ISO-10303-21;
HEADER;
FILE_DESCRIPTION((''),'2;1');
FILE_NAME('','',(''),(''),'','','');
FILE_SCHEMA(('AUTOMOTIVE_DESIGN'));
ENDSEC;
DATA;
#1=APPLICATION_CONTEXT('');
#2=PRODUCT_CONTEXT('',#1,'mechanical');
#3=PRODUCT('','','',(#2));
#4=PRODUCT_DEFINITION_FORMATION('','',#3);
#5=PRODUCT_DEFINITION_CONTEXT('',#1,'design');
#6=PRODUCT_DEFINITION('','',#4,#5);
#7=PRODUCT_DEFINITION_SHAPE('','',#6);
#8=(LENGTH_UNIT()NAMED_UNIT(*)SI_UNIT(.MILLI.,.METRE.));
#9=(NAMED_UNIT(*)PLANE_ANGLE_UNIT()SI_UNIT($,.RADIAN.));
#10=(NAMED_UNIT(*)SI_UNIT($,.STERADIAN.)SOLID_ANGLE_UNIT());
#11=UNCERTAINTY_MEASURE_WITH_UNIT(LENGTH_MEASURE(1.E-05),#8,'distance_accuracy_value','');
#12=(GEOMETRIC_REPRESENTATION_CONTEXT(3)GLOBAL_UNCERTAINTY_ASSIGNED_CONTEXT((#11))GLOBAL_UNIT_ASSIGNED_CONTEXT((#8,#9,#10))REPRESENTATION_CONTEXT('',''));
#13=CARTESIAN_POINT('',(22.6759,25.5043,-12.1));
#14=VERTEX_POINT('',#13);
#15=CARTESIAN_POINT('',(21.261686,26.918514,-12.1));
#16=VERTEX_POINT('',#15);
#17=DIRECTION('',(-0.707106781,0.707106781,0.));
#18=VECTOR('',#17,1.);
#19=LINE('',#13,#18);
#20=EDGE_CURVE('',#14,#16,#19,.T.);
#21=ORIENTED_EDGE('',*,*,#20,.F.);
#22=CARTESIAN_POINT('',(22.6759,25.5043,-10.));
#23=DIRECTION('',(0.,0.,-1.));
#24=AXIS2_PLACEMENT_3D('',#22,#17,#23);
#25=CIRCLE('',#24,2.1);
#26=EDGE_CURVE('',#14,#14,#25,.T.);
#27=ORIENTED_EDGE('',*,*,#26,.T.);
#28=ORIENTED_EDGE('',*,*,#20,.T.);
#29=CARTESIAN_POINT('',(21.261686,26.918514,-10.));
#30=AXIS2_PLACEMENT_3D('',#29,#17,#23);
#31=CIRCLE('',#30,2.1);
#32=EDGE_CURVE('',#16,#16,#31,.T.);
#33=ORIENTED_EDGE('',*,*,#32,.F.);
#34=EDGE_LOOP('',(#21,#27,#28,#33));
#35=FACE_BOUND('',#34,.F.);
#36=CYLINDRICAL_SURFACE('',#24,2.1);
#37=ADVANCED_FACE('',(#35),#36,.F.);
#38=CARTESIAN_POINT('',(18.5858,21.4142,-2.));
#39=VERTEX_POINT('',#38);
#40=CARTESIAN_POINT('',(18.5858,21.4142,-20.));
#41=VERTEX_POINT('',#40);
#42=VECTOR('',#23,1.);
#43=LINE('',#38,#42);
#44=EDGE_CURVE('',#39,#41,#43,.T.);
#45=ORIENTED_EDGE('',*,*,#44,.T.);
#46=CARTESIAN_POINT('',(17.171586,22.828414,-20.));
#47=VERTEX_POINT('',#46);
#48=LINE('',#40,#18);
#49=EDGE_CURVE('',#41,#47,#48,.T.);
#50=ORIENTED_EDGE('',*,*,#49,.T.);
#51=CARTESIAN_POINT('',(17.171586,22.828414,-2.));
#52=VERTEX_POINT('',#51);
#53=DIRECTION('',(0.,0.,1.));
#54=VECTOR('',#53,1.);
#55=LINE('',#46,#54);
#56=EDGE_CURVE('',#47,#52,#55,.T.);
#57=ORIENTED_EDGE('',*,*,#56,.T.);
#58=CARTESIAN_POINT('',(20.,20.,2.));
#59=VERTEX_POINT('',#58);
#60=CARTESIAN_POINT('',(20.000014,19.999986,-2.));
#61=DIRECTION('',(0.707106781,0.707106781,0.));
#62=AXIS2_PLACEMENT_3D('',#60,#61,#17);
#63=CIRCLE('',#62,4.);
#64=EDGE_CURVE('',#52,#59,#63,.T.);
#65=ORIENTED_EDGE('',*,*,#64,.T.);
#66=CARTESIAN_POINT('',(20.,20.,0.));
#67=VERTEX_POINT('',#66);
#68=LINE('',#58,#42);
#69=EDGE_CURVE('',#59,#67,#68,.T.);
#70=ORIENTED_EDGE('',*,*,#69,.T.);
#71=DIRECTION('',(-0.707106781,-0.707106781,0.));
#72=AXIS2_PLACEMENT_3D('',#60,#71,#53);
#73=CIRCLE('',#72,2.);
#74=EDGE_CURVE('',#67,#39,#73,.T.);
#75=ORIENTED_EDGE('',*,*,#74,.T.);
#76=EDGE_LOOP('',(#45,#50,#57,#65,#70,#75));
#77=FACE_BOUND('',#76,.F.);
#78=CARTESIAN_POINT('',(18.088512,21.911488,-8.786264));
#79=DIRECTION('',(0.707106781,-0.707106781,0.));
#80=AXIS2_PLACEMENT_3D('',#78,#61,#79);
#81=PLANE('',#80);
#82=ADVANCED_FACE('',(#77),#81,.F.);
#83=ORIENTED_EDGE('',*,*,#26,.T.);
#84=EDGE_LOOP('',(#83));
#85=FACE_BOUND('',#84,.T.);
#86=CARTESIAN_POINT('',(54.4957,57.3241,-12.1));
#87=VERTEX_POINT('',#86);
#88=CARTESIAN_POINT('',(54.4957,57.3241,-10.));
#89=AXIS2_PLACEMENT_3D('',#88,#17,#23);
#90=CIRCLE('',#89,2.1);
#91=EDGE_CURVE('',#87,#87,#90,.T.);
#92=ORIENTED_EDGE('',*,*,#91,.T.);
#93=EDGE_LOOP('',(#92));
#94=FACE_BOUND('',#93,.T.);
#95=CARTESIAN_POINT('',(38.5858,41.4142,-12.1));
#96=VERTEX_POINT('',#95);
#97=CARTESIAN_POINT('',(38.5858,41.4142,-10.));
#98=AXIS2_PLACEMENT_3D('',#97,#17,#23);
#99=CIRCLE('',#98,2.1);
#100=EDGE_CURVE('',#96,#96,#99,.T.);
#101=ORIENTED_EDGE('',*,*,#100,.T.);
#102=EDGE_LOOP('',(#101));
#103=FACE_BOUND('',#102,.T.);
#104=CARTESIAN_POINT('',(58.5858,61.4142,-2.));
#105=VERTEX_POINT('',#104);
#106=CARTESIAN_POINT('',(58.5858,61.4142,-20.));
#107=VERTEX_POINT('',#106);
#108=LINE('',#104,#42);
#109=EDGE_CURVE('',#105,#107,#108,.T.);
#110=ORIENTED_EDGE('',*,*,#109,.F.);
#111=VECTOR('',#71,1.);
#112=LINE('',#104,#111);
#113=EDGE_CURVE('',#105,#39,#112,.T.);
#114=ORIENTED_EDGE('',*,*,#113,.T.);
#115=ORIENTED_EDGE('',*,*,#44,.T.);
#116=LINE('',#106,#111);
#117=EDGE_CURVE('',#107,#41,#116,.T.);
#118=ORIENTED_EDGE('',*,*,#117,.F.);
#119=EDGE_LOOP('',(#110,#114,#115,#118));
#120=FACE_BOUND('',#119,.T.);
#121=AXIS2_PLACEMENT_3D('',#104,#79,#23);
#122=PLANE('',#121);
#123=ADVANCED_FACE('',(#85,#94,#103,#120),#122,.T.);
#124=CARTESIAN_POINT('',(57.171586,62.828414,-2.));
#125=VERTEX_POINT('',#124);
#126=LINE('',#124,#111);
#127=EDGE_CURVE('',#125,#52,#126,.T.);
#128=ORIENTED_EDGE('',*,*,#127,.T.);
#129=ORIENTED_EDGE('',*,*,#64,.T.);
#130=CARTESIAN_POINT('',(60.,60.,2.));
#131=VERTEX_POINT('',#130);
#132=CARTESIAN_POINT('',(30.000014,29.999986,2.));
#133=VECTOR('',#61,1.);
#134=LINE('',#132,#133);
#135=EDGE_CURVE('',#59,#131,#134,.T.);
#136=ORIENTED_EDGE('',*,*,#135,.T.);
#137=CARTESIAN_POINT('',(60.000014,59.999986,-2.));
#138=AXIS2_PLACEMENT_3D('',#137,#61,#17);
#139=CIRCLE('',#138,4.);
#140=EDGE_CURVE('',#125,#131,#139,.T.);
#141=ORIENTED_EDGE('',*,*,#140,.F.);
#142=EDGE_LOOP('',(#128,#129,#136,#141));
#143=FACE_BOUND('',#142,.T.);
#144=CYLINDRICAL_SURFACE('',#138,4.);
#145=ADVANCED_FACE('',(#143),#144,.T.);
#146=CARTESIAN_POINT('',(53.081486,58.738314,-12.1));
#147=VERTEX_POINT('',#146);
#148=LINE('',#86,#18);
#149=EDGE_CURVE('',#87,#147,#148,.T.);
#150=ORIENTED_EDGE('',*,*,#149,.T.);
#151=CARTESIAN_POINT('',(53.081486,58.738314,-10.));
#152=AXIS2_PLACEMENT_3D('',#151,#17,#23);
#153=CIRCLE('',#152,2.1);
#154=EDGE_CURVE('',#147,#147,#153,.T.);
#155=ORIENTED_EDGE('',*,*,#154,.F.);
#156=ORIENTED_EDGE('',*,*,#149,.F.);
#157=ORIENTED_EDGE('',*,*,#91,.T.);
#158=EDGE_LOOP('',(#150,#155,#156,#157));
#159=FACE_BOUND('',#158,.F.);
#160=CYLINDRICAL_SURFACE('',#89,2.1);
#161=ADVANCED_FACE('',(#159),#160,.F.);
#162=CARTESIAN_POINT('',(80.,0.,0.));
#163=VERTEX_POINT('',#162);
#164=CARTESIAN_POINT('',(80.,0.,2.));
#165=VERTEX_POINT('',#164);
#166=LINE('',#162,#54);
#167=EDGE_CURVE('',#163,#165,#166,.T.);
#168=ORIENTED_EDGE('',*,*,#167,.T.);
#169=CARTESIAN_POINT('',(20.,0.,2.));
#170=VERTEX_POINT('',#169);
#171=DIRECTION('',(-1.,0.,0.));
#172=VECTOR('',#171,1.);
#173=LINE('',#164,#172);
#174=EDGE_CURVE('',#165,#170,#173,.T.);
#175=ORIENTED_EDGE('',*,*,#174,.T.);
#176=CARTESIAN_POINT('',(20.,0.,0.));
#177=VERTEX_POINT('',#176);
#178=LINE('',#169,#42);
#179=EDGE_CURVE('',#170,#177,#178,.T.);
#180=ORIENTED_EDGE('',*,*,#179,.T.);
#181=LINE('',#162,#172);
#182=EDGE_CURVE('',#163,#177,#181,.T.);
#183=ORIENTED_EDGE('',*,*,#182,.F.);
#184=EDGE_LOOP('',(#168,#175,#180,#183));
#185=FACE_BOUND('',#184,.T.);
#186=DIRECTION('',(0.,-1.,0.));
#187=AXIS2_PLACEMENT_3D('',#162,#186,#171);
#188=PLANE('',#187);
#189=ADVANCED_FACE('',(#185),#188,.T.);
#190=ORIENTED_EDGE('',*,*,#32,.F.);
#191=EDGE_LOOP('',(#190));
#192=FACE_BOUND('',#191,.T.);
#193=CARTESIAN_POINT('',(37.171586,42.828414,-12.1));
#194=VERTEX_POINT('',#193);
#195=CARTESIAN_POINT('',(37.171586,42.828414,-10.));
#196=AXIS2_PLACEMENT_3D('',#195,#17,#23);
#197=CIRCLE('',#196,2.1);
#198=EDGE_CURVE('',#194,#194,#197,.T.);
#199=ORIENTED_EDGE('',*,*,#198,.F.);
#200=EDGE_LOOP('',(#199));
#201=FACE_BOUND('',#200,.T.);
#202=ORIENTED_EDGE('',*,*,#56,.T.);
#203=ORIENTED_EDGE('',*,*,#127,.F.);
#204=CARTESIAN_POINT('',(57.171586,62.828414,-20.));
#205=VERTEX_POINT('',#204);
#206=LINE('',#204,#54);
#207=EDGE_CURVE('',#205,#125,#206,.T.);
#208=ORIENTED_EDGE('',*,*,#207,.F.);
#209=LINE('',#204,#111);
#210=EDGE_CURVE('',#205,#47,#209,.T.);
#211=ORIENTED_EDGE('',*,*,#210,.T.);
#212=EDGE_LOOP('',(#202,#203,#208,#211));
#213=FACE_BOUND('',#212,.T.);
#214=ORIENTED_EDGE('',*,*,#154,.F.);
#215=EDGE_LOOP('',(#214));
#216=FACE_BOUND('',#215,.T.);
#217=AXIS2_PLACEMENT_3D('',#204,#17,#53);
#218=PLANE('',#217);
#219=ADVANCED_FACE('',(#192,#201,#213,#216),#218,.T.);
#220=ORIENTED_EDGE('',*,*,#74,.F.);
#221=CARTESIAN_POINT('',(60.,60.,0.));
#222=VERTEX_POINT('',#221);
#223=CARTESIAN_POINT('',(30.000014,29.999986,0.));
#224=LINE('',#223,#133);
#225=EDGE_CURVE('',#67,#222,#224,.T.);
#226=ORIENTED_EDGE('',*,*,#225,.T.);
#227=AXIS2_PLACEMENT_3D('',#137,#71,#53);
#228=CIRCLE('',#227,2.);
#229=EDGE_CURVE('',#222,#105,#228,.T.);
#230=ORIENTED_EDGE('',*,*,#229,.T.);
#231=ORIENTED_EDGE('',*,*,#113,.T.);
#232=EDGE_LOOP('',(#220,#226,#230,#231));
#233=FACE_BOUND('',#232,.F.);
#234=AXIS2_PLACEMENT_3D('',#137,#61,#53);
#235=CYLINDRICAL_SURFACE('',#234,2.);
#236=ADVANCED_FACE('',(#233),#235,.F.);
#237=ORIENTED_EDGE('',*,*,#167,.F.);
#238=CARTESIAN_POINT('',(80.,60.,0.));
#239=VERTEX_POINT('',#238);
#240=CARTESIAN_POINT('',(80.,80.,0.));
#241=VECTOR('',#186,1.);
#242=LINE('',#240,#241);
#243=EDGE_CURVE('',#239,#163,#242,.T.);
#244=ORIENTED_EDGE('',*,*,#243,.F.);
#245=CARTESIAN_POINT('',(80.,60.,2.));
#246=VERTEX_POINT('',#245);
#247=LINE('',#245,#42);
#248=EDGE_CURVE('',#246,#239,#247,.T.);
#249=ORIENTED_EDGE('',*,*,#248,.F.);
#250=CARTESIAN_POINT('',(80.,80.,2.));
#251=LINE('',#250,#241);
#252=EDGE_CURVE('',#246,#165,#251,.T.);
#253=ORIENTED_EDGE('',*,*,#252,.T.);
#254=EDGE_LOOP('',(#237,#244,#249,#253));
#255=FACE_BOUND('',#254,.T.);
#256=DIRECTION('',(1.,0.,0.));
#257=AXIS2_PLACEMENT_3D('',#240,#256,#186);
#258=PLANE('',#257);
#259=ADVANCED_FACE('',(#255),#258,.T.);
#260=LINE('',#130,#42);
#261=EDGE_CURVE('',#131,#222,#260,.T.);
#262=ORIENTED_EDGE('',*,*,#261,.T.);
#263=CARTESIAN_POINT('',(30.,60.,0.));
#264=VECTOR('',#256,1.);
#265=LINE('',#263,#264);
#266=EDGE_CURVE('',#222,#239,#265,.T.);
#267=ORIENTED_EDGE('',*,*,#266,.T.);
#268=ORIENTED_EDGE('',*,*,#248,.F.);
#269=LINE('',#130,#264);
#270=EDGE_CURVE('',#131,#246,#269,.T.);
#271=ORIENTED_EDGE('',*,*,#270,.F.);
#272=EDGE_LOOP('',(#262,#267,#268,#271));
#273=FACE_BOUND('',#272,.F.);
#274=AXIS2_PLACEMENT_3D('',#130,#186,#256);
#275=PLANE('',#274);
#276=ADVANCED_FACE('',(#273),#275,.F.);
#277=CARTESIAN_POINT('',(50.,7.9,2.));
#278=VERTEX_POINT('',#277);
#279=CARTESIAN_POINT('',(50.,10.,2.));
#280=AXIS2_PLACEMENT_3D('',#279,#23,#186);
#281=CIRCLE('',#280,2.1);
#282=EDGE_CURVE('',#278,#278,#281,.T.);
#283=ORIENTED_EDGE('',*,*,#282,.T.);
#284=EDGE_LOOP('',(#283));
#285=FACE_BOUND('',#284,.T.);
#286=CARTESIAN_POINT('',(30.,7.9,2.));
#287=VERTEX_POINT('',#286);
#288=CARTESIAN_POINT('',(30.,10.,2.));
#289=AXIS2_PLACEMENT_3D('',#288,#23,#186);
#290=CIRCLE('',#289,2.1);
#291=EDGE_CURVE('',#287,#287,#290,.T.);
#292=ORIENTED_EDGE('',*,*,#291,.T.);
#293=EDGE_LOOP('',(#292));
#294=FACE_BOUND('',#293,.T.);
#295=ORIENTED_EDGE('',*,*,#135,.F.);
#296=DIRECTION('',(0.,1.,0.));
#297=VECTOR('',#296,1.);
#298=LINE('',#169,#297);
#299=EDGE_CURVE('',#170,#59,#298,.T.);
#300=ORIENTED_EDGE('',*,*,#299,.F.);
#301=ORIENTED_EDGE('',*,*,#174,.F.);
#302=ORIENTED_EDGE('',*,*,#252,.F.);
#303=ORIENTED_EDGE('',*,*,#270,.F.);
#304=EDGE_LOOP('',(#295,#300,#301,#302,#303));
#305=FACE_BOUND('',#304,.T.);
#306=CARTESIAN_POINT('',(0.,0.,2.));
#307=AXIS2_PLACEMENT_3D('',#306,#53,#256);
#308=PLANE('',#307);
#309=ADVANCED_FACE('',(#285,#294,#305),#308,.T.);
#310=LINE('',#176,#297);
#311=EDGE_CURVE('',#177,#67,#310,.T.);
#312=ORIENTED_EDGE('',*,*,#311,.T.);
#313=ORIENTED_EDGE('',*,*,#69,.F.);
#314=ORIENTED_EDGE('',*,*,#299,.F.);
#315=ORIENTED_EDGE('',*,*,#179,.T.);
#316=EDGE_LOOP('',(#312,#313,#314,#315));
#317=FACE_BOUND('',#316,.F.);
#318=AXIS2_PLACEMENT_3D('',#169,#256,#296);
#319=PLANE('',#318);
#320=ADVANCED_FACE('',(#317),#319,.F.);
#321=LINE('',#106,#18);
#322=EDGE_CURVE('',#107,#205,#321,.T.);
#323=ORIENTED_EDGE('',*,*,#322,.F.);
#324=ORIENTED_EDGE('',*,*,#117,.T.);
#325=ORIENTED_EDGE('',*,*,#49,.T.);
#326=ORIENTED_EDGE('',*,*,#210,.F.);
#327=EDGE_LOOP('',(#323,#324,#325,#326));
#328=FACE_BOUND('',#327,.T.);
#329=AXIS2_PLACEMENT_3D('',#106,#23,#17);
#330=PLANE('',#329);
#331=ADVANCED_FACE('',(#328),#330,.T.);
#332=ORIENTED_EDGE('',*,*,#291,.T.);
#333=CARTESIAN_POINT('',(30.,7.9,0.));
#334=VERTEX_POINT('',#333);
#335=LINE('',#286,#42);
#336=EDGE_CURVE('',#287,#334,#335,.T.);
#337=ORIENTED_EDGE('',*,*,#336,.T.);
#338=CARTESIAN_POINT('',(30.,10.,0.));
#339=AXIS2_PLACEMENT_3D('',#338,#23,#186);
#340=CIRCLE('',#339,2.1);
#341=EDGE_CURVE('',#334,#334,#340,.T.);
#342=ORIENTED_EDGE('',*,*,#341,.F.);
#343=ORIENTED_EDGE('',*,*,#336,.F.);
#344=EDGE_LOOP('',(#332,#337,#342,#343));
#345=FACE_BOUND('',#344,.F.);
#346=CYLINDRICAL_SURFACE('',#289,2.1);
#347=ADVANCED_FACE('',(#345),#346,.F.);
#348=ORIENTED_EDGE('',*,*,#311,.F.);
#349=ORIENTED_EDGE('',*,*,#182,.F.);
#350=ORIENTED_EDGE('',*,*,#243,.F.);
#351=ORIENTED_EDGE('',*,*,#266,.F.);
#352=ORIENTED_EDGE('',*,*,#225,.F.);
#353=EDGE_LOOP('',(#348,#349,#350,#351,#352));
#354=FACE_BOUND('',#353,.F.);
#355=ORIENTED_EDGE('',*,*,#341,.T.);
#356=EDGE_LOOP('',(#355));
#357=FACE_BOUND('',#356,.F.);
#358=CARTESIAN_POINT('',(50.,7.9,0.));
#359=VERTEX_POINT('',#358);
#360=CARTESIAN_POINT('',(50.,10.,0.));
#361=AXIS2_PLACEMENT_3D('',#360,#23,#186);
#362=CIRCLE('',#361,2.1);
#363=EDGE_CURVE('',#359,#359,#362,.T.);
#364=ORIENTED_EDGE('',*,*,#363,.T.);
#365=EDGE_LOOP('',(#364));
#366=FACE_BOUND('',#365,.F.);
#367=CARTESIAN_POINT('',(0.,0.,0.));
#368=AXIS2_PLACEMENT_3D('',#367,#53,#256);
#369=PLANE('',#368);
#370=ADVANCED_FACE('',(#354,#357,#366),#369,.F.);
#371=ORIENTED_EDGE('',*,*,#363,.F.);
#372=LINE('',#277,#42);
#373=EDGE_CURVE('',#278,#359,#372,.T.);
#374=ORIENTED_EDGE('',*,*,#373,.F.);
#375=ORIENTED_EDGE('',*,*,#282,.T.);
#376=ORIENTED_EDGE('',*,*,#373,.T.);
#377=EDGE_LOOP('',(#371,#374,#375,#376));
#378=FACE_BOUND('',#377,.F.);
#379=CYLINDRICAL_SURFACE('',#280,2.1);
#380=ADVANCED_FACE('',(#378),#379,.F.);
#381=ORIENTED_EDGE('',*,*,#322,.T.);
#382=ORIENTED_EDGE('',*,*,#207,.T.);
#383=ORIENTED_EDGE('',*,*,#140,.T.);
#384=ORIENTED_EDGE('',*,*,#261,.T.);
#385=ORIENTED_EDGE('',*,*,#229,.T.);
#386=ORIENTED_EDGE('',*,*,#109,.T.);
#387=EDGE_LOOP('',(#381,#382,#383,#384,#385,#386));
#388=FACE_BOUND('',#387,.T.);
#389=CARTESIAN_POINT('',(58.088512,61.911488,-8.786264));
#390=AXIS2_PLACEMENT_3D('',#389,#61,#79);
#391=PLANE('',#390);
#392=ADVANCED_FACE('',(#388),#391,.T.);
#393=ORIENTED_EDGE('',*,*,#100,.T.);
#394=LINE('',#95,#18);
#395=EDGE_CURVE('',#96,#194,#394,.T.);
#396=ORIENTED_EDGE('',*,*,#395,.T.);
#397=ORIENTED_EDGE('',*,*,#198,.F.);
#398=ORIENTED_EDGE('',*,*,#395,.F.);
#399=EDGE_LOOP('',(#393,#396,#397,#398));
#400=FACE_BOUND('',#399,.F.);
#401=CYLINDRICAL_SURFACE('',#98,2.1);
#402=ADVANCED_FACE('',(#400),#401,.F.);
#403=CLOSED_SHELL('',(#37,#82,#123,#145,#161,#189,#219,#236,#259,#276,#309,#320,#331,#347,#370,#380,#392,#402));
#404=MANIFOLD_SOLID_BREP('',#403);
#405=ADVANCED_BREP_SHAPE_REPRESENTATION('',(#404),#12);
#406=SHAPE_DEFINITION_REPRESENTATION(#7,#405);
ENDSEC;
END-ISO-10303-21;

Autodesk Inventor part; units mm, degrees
ref_plane "YZ Plane" through (0, 0, 0) normal (1, 0, 0) x (0, 1, 0)
ref_plane "XZ Plane" through (0, 0, 0) normal (0, 1, 0) x (-1, 0, 0)
ref_plane "XY Plane" through (0, 0, 0) normal (0, 0, 1) x (1, 0, 0)
sketch "スケッチ1" plane through (0, 0, 0) normal (0, 0, 1) x (1, 0, 0)
  line L0 (0, 0) -> (80, 80)
  line L1 (80, 80) -> (80, 0)
  line L2 (80, 0) -> (0, 0)
  dimension "d0" = 45
  dimension "d1" = 80
extrude "プレート1" add sketch "スケッチ1" along normal blind 2
sketch "スケッチ2" plane through (0, 0, 2) normal (0, 0, 1) x (1, 0, 0)
  line L0 (0, 0) -> (80, 80) projected
  line L1 (0, 0) -> (20, 0)
  line L2 (20, 0) -> (20, 20)
  line L3 (20, 20) -> (0, 20)
  line L4 (0, 20) -> (0, 0)
  line L5 (80, 80) -> (60, 80)
  line L6 (60, 80) -> (60, 60)
  line L7 (60, 60) -> (80, 60)
  line L8 (80, 60) -> (80, 80)
  line L9 (0, 0) -> (80, 80) projected
  dimension "d3" = 20
  dimension "d6" = 20
extrude "押し出し1" cut sketch "スケッチ2" against normal blind 10 contours L0 L2 L1 | L6 L5 L0 | L0 L8 L7
sketch "スケッチ3" plane through (0, 0, 2) normal (0, 0, 1) x (1, 0, 0)
  line L0 (20, 20) -> (20, 0) projected
  line L1 (80, 0) -> (20, 0) projected
  line L2 (80, 60) -> (80, 0) projected
  line L3 (80, 60) -> (60, 60) projected
  line L4 (20, 20) -> (60, 60) projected
  line L5 (20, 20) -> (60, 60) projected
  line L6 (20, 20) -> (18.5858, 21.4142)
  line L7 (18.5858, 21.4142) -> (58.5858, 61.4142)
  line L8 (58.5858, 61.4142) -> (60, 60)
  point P0 (0, 0)
  dimension "d7" = 2
extrude "押し出し2" add sketch "スケッチ3" against normal up to surface (2 mm away) contours L6 L7 L8 L4
sketch "スケッチ4" plane through (58.5858, 61.4142, 0) normal (-0.7071068, 0.7071068, 0) x (-0.7071068, -0.7071068, 0)
  line L0 (56.5685, 0) -> (0, 0)
  line L1 (0, 0) -> (0, -20)
  line L2 (0, -20) -> (56.5685, -20)
  line L3 (56.5685, -20) -> (56.5685, 0)
edge flange "フランジ1" height 22 angle 90 thickness 2 bend radius 2 thickness toward (-0.7071068, 0.7071068, 0) relief tear relief width 2 relief depth 1 edges at (38.5858, 41.4142, 0) wall of the first edge with corners at (18.5858, 21.4142, 0) (58.5858, 61.4142, 0) (58.5858, 61.4142, -20) (18.5858, 21.4142, -20)
bend "曲げ1"
corner "コーナー1"
sketch "スケッチ5" plane through (18.5858, 21.4142, -2) normal (0.7071068, -0.7071068, 0) x (-0.7071068, -0.7071068, 0)
  line L0 (-56.5685, 0) -> (0, 0) projected
  line L1 (0, 0) -> (0, 18) projected
  line L2 (0, 18) -> (-56.5685, 18) projected
  line L3 (-56.5685, 0) -> (-56.5685, 18) projected
  line L4 (-56.5685, 0) -> (0, 0) projected
  point P0 (28.2843, -2)
  point P1 (-50.7843, 8)
  point P2 (-5.7843, 8)
  point P3 (-28.2843, 8)
  point P4 (-28.2843, 0)
  point P5 (-28.2843, 0)
  dimension "d20" = 10
  dimension "d23" = 45
  dimension "d24" = 22.5
hole "穴1" at (54.4957, 57.3241, -10) at (22.6759, 25.5043, -10) at (38.5858, 41.4142, -10) direction (-0.7071068, 0.7071068, 0) diameter 4.2 depth 2
sketch "スケッチ6" plane through (0, 0, 2) normal (0, 0, 1) x (1, 0, 0)
  line L0 (80, 0) -> (20, 0) projected
  line L1 (20, 20) -> (20, 0) projected
  line L2 (80, 60) -> (80, 0) projected
  point P0 (0, 0)
  point P1 (30, 10)
  point P2 (70, 10)
  point P3 (50, 10)
  dimension "d32" = 10
  dimension "d33" = 10
  dimension "d34" = 10
  dimension "d35" = 20
hole "穴2" at (30, 10, 2) at (50, 10, 2) direction (0, 0, -1) diameter 4.2 depth 2
equation "\"d24\" = 0.5 * d23"
equation "\"d30\" = Thickness"
equation "\"d41\" = Thickness"
equation "\"d2\" = Thickness"
equation "\"d10\" = BendReliefWidth"
equation "\"d11\" = BendReliefDepth"
equation "\"d12\" = MinimumRemnant"
equation "\"d13\" = TransitionRadius"
equation "\"d16\" = BendRadius"
equation "\"d17\" = CornerReliefSize"
equation "\"d18\" = GapSize"
equation "\"d19\" = JacobiRadiusSize"
equation "\"BendRadius\" = Thickness"
equation "\"BendReliefWidth\" = Thickness"
equation "\"BendReliefDepth\" = 0.5 * Thickness"
equation "\"CornerReliefSize\" = 4 * Thickness"
equation "\"MinimumRemnant\" = 2 * Thickness"
equation "\"TransitionRadius\" = BendRadius"
equation "\"JacobiRadiusSize\" = BendRadius"
equation "\"GapSize\" = Thickness"
equation "\"Thickness\" = 2"
properties part number "CoreXY_Angle"
